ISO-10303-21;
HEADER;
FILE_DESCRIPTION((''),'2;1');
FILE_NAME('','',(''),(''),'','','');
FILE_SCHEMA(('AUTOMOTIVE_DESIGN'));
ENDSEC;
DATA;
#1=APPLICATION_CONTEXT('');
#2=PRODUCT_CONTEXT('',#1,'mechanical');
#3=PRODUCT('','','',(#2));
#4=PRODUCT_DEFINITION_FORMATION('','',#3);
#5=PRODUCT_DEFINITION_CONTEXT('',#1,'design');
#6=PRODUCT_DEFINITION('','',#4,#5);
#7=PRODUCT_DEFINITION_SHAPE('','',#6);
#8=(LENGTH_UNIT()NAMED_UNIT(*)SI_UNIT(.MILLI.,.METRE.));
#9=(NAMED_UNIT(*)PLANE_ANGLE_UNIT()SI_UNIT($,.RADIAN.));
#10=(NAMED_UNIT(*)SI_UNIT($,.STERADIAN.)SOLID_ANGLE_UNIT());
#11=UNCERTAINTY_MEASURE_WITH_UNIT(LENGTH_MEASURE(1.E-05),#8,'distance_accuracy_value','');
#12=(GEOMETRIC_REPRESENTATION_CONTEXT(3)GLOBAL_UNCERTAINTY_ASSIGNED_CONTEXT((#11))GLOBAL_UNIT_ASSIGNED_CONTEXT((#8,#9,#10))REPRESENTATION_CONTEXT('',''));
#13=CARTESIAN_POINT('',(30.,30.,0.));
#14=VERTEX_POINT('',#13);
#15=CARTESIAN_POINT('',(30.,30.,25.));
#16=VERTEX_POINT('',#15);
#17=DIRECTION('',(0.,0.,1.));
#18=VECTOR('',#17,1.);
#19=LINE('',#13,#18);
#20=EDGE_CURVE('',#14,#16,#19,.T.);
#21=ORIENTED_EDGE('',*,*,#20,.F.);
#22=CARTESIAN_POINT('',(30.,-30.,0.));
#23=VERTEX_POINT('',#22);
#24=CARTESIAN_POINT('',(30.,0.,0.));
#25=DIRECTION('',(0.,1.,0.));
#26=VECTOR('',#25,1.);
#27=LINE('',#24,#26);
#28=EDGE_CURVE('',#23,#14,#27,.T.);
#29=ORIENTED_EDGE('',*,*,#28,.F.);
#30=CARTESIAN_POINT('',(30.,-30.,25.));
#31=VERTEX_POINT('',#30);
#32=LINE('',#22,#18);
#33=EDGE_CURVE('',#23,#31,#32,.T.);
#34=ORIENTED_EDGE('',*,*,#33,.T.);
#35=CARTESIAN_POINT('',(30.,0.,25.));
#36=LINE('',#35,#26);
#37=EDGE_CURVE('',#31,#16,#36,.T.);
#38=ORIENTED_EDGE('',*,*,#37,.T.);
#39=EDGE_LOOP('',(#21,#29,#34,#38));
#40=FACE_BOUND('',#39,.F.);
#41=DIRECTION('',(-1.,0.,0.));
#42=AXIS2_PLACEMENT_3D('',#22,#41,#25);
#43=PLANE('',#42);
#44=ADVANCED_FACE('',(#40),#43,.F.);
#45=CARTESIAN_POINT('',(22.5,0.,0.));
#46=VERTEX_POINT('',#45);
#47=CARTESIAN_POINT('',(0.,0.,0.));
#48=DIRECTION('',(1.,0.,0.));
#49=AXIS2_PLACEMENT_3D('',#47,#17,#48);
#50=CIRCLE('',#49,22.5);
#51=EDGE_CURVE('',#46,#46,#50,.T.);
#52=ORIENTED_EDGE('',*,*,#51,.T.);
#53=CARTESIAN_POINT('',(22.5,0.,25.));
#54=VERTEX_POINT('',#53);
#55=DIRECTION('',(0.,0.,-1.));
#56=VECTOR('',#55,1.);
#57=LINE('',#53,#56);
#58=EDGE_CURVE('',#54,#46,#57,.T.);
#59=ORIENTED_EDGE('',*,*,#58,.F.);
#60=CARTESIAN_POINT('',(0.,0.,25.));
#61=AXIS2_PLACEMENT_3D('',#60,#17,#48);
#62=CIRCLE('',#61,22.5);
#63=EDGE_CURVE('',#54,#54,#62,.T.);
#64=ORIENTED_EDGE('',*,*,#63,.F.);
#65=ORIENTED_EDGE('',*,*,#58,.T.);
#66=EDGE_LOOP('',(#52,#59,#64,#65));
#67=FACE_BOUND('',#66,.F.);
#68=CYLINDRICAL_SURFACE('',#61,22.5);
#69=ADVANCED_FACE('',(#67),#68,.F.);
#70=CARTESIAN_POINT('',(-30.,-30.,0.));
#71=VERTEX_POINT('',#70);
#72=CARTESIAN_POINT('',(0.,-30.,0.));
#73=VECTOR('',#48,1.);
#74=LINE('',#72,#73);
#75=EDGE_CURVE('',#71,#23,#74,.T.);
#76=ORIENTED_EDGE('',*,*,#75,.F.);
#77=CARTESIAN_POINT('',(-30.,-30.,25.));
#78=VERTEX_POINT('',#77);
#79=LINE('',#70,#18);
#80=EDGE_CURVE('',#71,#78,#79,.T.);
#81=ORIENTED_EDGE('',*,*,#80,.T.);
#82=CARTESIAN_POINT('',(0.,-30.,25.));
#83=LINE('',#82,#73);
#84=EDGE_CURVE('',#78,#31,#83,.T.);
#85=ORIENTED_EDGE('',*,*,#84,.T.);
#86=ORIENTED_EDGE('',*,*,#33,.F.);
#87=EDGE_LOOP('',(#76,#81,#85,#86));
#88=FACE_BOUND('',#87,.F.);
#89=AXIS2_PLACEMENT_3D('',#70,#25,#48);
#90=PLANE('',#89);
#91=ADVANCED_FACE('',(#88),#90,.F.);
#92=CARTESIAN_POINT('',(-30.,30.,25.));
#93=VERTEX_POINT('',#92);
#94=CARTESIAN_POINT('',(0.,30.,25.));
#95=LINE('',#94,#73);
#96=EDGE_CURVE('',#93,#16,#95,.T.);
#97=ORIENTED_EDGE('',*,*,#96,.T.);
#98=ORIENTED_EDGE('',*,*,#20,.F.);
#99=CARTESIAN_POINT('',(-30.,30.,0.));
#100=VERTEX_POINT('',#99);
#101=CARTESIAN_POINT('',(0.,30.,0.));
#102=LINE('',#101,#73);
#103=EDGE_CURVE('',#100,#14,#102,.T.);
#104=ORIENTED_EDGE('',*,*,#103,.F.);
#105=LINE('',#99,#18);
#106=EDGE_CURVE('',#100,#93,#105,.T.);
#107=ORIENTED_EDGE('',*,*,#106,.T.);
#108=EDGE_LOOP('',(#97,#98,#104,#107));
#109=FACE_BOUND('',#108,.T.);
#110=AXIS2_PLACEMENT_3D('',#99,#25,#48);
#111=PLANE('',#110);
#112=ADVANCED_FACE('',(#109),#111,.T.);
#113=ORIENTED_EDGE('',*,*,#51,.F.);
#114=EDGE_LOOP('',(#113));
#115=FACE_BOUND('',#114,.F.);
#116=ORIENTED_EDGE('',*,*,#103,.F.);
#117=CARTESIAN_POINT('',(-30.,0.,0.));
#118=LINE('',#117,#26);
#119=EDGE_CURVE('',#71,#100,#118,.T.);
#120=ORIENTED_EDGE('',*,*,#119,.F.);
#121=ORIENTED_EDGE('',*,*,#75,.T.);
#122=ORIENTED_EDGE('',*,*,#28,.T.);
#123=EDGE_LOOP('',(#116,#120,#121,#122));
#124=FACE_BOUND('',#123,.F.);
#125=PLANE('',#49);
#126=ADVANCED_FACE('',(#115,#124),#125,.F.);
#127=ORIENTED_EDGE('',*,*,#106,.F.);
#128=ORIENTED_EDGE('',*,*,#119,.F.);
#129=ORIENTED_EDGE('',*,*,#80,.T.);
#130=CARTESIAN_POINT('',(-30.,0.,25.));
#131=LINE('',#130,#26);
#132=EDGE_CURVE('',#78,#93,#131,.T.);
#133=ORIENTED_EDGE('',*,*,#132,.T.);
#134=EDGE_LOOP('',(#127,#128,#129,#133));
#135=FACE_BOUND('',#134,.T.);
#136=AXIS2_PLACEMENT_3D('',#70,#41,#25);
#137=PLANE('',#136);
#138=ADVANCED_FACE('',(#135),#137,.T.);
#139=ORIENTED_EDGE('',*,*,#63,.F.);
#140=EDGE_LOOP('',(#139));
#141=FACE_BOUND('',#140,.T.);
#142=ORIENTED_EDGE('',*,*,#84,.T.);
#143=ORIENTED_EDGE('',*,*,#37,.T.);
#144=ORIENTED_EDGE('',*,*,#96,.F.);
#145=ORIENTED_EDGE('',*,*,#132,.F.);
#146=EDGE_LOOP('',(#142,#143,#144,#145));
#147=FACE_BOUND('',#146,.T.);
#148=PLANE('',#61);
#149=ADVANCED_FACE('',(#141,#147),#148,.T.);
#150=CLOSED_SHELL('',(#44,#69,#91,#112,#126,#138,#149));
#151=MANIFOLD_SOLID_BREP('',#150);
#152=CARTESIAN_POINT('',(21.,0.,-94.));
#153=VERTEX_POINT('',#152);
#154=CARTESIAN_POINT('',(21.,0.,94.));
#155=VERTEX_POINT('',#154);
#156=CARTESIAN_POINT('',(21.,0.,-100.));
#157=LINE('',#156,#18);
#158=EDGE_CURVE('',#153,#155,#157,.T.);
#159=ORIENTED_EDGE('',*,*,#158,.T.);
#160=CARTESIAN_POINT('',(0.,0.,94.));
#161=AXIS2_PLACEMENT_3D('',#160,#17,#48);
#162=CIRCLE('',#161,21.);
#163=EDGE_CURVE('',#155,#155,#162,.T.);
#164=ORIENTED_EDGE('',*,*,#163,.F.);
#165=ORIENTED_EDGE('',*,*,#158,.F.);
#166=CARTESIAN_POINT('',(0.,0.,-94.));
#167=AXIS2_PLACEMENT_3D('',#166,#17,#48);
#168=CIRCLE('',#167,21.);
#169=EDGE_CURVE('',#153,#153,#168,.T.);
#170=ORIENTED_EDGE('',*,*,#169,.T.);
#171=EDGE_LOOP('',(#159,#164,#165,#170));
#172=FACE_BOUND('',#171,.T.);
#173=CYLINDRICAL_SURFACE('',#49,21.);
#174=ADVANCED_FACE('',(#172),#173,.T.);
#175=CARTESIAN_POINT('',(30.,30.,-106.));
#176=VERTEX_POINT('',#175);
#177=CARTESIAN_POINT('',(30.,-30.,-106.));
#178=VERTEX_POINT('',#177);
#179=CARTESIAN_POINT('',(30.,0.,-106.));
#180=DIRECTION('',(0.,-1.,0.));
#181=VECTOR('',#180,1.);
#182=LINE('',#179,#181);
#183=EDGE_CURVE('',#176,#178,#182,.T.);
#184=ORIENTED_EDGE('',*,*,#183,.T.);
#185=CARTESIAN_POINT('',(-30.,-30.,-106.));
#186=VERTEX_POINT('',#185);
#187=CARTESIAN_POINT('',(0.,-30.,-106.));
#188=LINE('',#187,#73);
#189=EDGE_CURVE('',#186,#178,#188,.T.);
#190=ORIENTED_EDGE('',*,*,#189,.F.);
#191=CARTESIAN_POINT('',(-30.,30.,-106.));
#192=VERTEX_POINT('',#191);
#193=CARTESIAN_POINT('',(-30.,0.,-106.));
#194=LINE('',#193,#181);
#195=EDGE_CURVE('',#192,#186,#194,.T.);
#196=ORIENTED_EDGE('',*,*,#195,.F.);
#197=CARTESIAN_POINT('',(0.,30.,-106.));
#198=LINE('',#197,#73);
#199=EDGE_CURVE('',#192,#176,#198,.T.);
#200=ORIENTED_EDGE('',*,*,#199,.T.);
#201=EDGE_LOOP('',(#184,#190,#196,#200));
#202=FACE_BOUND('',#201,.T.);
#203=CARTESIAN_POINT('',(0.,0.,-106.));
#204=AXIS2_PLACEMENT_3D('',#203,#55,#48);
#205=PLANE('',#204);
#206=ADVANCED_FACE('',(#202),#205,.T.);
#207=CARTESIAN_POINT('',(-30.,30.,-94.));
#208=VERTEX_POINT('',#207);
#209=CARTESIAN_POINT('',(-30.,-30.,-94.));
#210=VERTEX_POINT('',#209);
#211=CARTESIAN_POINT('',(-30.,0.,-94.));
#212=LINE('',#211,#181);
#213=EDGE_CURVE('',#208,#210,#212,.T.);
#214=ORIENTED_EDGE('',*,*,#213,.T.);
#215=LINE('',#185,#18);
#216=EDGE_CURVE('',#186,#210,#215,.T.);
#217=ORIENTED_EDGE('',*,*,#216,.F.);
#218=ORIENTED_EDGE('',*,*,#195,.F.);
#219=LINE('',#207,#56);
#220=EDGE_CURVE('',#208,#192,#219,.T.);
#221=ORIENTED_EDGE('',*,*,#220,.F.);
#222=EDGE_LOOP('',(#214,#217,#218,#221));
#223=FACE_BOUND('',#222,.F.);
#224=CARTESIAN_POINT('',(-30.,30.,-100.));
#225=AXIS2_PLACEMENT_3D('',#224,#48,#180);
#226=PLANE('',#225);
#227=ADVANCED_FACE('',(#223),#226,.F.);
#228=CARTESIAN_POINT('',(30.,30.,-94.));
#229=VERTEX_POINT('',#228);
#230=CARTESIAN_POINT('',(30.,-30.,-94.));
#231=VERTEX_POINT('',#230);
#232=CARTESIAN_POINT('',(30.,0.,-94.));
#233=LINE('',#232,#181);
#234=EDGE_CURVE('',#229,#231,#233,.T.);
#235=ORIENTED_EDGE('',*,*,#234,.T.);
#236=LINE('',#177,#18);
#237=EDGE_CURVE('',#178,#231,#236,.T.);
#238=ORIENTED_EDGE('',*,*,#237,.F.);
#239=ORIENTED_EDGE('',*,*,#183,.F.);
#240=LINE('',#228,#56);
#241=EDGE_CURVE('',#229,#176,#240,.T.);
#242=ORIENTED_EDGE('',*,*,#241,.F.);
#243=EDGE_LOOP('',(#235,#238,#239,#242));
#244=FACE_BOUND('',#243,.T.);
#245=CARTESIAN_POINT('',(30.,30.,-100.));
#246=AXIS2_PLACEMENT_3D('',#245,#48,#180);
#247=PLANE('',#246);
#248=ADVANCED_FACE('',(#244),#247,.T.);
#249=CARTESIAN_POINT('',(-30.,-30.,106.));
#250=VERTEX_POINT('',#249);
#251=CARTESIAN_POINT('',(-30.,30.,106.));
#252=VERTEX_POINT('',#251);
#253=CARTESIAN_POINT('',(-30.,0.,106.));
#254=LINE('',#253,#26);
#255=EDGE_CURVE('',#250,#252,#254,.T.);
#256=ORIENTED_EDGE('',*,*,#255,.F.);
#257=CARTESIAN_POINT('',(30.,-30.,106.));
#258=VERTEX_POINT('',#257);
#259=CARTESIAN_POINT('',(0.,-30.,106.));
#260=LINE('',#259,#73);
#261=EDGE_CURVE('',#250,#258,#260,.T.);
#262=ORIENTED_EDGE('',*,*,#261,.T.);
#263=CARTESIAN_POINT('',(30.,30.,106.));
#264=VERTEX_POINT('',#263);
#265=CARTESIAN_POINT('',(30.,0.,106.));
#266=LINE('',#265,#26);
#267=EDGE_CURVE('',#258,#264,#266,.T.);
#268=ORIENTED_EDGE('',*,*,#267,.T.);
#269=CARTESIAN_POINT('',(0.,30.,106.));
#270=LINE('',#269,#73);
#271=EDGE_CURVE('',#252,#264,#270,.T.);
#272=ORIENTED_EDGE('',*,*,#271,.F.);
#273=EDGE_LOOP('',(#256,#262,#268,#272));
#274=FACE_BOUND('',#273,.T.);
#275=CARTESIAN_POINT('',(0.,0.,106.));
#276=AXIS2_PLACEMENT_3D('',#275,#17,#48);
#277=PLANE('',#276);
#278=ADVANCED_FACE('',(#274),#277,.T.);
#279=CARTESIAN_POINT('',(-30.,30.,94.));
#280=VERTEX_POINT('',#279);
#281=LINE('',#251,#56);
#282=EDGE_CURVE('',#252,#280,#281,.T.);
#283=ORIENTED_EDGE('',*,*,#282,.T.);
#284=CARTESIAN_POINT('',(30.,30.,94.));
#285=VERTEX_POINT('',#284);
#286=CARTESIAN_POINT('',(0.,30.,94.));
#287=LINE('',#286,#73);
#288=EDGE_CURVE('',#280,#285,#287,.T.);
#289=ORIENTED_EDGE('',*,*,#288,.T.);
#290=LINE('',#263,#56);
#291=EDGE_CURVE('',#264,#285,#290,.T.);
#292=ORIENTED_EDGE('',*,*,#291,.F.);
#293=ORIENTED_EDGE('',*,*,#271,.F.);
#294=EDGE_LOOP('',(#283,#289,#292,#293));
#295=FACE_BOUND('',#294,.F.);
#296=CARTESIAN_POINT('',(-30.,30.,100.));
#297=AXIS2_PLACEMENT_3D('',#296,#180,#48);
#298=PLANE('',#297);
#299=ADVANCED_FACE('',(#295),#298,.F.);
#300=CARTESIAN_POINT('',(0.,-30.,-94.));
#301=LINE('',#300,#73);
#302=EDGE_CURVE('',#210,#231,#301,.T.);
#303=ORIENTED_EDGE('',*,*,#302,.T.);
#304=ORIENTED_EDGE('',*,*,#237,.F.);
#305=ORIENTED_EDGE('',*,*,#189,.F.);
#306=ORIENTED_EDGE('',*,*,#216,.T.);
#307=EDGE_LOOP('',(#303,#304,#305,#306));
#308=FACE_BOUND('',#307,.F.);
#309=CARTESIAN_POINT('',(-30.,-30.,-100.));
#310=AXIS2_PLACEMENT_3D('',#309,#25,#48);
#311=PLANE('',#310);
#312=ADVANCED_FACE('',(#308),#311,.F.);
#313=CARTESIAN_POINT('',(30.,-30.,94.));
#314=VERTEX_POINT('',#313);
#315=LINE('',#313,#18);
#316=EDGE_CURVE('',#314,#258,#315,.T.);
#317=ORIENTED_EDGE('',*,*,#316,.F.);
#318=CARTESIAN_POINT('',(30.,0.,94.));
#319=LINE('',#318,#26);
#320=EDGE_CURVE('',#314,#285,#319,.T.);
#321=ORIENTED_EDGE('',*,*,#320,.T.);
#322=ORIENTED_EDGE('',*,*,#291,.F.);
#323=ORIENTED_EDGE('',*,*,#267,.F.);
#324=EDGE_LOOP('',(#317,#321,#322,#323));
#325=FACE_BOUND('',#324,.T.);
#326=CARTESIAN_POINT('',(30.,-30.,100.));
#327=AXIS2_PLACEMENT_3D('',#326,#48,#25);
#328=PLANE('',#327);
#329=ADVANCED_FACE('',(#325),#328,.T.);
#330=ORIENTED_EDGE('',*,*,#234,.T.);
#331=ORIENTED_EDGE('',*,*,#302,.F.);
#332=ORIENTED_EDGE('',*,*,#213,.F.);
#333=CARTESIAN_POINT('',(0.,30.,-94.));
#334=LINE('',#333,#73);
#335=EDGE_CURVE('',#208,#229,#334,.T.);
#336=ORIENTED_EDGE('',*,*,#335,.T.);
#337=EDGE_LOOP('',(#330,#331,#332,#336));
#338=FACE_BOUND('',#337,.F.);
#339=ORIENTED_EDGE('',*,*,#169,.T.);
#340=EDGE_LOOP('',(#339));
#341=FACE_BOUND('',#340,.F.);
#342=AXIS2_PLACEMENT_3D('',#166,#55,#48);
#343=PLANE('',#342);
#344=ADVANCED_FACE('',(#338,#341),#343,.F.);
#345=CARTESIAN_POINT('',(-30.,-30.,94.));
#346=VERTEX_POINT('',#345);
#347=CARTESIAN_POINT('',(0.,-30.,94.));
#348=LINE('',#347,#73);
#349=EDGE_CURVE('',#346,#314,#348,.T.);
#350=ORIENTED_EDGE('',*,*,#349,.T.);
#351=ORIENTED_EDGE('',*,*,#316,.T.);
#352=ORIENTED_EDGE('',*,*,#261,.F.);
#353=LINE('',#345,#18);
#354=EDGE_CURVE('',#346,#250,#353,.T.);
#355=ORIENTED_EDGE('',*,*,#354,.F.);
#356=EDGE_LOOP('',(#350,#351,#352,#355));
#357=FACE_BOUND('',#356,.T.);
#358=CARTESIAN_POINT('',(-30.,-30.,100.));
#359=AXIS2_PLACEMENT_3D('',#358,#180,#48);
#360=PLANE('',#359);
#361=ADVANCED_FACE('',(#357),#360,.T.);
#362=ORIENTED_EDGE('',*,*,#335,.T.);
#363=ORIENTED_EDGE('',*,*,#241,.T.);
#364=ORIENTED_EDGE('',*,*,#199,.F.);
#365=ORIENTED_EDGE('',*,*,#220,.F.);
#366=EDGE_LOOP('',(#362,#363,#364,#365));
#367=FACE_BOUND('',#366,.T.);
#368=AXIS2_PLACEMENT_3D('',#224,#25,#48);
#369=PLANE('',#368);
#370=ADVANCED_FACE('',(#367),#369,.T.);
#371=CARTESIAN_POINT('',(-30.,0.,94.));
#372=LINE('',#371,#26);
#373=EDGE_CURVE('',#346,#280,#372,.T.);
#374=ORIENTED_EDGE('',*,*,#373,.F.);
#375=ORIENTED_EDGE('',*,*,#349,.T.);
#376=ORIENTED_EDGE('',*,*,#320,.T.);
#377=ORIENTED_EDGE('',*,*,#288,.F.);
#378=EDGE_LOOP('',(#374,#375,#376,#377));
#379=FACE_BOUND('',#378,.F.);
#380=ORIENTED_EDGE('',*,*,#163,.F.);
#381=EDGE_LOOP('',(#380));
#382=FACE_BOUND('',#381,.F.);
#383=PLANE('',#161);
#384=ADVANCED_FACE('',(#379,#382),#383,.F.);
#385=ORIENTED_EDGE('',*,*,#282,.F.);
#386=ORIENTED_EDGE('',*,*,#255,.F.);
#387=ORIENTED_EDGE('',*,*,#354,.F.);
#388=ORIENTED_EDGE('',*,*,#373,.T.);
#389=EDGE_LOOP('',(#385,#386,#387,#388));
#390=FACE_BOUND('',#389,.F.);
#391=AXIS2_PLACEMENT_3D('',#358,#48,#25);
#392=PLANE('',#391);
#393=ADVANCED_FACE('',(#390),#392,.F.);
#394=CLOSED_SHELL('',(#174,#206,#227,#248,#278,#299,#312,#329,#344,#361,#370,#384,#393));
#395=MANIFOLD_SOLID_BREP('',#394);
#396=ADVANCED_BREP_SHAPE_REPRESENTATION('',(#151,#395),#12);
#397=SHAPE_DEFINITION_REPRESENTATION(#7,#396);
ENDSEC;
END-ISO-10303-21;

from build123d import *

# Parameters (mm, degrees)
F0_W     = 60
F0_H     = 60
F1_DEPTH = 25
F2_R     = 22.5
F3_DEPTH = 25
F4_R     = 21
F5_DEPTH = 100
F6_W     = 60
F6_H     = 60
F6_R     = 21
F7_DEPTH = 6
F8_W     = 60
F8_H     = 60
F8_R     = 21
F9_DEPTH = 6


with BuildPart() as f1:
    # F0 (on Top) → F1 (new body)
    with BuildSketch(Plane.XY):
        Rectangle(F0_W, F0_H)
    extrude(amount=F1_DEPTH)

    # F2 (on face) → F3 (cut)
    with BuildSketch(Plane.XY.offset(25)):
        Circle(F2_R)
    extrude(amount=-F3_DEPTH, mode=Mode.SUBTRACT)


with BuildPart() as f5:
    # F4 (on Top) → F5 (new body, symmetric)
    with BuildSketch(Plane.XY):
        Circle(F4_R)
    extrude(amount=F5_DEPTH, both=True)

    # F6 (on face) → F7 (join, symmetric)
    with BuildSketch(Plane.XY.offset(100)):
        Rectangle(F6_W, F6_H)
        Circle(F6_R, mode=Mode.SUBTRACT)
        Circle(F6_R)
    extrude(amount=F7_DEPTH, both=True)

    # F8 (on face) → F9 (join, symmetric)
    with BuildSketch(Plane(origin=(0, 0, -100), x_dir=(1, 0, 0), z_dir=(0, 0, -1))):
        Rectangle(F8_W, F8_H)
        Circle(F8_R, mode=Mode.SUBTRACT)
        Circle(F8_R)
    extrude(amount=F9_DEPTH, both=True)


solid = Compound([f1.part, f5.part])
